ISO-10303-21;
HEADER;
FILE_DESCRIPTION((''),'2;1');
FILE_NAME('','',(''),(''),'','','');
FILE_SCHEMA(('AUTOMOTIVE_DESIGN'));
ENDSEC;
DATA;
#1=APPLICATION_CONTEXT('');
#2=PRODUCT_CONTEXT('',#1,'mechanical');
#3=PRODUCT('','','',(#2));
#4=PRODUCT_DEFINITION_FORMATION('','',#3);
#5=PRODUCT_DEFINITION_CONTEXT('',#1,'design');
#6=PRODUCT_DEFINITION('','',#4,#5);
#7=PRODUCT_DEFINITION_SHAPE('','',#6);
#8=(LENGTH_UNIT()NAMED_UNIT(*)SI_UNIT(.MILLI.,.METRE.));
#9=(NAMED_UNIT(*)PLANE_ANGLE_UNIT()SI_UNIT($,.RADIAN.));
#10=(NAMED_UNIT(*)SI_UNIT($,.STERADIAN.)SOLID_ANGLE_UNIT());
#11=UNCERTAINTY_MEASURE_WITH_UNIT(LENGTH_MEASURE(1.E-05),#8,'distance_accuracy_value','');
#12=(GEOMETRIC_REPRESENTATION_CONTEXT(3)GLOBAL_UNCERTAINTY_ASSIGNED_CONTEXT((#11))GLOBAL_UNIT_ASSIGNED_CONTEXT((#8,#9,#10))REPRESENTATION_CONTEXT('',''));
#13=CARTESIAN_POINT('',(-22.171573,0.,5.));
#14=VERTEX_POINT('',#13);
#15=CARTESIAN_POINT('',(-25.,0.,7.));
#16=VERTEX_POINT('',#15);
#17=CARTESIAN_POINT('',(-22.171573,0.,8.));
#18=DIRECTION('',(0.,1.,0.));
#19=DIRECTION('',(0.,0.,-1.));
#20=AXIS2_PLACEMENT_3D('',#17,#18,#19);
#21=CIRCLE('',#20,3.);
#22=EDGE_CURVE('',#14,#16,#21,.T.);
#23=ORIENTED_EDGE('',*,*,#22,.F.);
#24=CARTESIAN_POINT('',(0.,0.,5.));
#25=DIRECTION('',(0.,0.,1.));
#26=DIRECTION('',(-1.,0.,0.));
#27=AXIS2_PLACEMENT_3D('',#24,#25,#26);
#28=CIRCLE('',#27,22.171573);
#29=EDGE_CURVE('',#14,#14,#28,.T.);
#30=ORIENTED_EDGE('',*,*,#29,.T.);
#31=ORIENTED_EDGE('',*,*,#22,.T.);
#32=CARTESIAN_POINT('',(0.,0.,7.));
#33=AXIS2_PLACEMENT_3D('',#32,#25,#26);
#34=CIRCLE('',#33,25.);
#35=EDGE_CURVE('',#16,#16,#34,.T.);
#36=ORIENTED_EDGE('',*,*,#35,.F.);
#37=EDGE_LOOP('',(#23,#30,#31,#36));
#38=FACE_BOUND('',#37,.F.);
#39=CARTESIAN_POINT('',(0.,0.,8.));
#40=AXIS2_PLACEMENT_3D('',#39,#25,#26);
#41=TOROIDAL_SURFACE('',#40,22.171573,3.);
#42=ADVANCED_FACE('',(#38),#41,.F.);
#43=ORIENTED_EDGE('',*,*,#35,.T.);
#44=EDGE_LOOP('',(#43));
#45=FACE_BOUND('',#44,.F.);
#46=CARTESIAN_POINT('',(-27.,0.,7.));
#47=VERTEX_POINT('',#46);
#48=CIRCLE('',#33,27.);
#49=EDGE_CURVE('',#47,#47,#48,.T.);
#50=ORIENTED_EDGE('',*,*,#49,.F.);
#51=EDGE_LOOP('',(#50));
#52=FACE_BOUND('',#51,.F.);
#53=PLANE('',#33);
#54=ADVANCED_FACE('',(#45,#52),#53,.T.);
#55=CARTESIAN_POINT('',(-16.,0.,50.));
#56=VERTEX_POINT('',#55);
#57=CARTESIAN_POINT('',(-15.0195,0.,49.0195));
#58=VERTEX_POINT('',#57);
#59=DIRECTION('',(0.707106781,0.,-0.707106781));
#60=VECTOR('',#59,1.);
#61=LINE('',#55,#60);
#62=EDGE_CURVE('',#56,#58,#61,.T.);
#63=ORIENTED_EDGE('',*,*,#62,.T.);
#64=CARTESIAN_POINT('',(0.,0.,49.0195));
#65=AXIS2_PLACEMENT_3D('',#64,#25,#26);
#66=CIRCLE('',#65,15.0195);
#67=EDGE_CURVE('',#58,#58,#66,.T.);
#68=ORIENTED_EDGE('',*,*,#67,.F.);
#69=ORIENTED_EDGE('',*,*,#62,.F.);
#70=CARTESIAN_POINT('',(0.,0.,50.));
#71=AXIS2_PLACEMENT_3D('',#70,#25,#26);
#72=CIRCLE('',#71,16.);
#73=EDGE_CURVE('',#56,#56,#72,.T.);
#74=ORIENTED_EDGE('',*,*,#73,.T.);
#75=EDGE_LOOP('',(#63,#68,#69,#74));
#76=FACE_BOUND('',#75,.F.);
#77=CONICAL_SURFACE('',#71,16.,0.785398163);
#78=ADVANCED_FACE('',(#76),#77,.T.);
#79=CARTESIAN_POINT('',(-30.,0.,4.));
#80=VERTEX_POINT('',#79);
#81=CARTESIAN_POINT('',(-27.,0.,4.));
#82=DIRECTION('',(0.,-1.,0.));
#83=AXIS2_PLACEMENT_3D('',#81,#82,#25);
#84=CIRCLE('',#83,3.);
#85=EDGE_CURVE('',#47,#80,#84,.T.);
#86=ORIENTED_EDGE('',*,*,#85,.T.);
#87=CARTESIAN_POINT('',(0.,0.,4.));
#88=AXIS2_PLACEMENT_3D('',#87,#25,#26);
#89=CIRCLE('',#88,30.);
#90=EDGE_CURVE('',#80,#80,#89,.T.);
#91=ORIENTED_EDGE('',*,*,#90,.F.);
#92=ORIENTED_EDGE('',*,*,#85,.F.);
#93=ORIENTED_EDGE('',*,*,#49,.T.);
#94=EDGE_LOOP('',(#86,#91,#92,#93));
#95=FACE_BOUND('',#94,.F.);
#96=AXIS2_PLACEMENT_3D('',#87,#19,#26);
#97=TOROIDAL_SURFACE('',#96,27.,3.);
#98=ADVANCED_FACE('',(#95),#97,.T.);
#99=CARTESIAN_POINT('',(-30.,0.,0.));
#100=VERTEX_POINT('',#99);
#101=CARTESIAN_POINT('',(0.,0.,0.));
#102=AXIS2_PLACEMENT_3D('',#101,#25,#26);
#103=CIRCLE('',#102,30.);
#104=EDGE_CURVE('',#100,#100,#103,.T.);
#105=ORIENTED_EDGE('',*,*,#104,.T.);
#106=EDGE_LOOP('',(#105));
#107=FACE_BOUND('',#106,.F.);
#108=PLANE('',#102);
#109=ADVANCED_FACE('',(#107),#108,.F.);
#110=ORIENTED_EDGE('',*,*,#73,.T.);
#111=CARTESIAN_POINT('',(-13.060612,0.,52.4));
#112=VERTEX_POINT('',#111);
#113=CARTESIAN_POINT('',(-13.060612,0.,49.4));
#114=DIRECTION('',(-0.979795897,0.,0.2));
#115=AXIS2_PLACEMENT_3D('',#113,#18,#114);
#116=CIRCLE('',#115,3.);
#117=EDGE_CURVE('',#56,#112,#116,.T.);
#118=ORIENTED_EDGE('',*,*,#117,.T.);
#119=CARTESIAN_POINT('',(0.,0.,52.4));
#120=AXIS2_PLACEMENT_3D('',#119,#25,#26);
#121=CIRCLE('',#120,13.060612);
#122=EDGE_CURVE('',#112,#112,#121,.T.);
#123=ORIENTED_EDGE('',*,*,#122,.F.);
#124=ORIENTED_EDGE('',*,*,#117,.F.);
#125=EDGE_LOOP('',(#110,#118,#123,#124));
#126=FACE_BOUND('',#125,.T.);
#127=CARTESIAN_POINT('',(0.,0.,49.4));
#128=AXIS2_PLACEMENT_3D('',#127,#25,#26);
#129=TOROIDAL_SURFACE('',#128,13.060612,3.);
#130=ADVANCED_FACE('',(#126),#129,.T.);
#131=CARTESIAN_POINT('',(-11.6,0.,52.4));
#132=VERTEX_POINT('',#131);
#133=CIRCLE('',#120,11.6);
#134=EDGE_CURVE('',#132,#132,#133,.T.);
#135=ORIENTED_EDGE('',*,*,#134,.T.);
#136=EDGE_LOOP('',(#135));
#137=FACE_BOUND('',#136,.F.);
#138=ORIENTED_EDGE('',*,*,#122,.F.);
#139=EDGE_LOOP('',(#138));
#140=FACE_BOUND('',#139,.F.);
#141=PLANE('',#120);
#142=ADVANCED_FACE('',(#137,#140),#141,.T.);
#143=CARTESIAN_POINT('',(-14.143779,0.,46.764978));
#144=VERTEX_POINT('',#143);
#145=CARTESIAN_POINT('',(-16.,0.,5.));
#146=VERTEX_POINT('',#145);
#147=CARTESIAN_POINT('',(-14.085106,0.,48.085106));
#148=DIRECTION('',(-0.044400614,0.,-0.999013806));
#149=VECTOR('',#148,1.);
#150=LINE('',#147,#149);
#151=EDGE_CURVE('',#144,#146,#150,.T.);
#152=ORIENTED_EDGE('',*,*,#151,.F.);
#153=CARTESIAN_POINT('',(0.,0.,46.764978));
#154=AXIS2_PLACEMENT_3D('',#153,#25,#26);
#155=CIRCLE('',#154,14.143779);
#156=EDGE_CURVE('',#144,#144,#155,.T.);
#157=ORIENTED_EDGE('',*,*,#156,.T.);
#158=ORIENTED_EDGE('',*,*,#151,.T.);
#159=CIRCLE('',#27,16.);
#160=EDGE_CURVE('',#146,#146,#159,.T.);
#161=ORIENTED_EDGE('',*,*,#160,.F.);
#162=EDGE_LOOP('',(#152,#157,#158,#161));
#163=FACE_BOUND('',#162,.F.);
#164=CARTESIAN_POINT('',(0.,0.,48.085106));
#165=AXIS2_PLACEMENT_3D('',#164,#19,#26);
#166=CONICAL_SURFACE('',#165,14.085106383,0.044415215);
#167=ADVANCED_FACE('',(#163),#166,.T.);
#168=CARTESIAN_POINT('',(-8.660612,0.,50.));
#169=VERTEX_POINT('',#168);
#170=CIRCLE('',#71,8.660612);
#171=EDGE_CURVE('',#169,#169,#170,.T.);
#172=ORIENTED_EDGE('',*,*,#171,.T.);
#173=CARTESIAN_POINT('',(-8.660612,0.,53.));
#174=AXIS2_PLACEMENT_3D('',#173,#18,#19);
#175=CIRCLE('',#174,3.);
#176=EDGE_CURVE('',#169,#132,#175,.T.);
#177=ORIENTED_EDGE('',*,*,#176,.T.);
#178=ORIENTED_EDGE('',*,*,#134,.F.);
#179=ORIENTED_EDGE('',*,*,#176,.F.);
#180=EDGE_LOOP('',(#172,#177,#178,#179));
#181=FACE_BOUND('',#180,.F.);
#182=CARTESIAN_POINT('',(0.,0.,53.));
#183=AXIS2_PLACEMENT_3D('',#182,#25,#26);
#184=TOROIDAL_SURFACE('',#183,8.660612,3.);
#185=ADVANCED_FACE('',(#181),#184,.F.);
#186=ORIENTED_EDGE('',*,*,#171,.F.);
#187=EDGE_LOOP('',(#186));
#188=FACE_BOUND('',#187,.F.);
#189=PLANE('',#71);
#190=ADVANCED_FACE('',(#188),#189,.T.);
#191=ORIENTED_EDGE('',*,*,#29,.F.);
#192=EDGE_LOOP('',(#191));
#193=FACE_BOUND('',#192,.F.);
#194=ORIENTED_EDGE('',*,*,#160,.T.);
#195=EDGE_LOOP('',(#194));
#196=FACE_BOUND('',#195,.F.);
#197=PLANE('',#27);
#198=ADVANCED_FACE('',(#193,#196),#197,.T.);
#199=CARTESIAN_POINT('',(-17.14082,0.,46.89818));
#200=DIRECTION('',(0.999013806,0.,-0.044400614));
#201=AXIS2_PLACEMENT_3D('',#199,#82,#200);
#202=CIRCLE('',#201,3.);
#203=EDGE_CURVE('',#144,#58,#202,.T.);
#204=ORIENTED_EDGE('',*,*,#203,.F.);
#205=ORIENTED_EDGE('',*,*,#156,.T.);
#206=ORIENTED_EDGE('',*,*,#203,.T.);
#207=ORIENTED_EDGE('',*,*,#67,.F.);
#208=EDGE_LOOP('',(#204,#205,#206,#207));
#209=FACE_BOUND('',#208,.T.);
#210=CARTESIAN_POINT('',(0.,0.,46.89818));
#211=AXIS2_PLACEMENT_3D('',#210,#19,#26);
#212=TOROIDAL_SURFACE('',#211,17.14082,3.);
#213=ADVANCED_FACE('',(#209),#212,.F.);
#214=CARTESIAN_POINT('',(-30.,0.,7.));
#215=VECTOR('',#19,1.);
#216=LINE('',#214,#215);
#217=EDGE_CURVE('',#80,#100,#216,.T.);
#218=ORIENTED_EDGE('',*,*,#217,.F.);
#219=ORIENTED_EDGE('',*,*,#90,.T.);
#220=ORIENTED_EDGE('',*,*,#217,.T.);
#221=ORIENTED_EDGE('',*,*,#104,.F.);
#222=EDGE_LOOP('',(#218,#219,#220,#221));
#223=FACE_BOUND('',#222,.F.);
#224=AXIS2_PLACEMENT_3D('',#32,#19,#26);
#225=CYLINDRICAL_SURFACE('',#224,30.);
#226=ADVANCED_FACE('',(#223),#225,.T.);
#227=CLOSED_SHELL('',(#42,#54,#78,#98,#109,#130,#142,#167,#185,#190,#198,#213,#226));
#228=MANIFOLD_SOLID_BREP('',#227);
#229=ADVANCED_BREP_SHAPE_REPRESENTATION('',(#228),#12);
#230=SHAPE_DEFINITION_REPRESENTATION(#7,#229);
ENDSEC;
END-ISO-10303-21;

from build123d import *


# Not quite as in the source:
# - a fillet or chamfer that OpenCascade refuses, or shapes differently, is made with other operations: its cross-section is extruded or revolved along the edge and cut away or added


with BuildPart() as f1:
    # F0 (on Front) → F1 (revolve)
    with BuildSketch(Plane.XZ):
        Polygon((-30, 7), (-30, 0), (0, 0), (0, 50), (-11.6, 50), (-11.6, 52.4), (-16, 52.4), (-16, 50), (-14.085106383, 48.085106383), (-16, 5), (-25, 5), (-25, 7), align=None)
    revolve(axis=Axis((0, 0, 15.8572417056), (0, 0, 1)))

    # F2: fillet of radius 3 on 5 edges, made by hand

    # F2_s1 → F2_t2 (revolve)
    with BuildSketch(Plane.XZ):
        with BuildLine():
            ThreePointArc((-22.1715728753, 5), (-23.9036236828, 5.5505102572), (-25, 7))
            Line((-25, 7), (-25, 5))
            Line((-25, 5), (-22.1715728753, 5))
        make_face()
    revolve(axis=Axis((0, 0, 5), (0, 0, 1)))

    # F2_s3 → F2_t4 (revolve)
    with BuildSketch(Plane.XZ):
        with BuildLine():
            ThreePointArc((-14.1437787706, 46.764977662), (-14.3443716648, 47.9844003118), (-15.0194998464, 49.0194998464))
            Line((-15.0194998464, 49.0194998464), (-14.085106383, 48.085106383))
            Line((-14.085106383, 48.085106383), (-14.1437787706, 46.764977662))
        make_face()
    revolve(axis=Axis((0, 0, 48.085106383), (0, 0, 1)))

    # F2_s5 → F2_t6 (revolve)
    with BuildSketch(Plane.XZ):
        with BuildLine():
            ThreePointArc((-8.6606123087, 50), (-10.5579789048, 50.6762099923), (-11.6, 52.4))
            Line((-11.6, 52.4), (-11.6, 50))
            Line((-11.6, 50), (-8.6606123087, 50))
        make_face()
    revolve(axis=Axis((0, 0, 50), (0, 0, 1)))

    # F2_s7 → F2_t8 (revolve, cut)
    with BuildSketch(Plane.XZ):
        with BuildLine():
            ThreePointArc((-27, 7), (-29.1213203436, 6.1213203436), (-30, 4))
            Line((-30, 4), (-30, 7))
            Line((-30, 7), (-27, 7))
        make_face()
    revolve(axis=Axis((0, 0, 7), (0, 0, 1)), mode=Mode.SUBTRACT)

    # F2_s9 → F2_t10 (revolve, cut)
    with BuildSketch(Plane.XZ):
        with BuildLine():
            ThreePointArc((-16, 50), (-14.9579789048, 51.7237900077), (-13.0606123087, 52.4))
            Line((-13.0606123087, 52.4), (-16, 52.4))
            Line((-16, 52.4), (-16, 50))
        make_face()
    revolve(axis=Axis((0, 0, 52.4), (0, 0, 1)), mode=Mode.SUBTRACT)


solid = f1.part
